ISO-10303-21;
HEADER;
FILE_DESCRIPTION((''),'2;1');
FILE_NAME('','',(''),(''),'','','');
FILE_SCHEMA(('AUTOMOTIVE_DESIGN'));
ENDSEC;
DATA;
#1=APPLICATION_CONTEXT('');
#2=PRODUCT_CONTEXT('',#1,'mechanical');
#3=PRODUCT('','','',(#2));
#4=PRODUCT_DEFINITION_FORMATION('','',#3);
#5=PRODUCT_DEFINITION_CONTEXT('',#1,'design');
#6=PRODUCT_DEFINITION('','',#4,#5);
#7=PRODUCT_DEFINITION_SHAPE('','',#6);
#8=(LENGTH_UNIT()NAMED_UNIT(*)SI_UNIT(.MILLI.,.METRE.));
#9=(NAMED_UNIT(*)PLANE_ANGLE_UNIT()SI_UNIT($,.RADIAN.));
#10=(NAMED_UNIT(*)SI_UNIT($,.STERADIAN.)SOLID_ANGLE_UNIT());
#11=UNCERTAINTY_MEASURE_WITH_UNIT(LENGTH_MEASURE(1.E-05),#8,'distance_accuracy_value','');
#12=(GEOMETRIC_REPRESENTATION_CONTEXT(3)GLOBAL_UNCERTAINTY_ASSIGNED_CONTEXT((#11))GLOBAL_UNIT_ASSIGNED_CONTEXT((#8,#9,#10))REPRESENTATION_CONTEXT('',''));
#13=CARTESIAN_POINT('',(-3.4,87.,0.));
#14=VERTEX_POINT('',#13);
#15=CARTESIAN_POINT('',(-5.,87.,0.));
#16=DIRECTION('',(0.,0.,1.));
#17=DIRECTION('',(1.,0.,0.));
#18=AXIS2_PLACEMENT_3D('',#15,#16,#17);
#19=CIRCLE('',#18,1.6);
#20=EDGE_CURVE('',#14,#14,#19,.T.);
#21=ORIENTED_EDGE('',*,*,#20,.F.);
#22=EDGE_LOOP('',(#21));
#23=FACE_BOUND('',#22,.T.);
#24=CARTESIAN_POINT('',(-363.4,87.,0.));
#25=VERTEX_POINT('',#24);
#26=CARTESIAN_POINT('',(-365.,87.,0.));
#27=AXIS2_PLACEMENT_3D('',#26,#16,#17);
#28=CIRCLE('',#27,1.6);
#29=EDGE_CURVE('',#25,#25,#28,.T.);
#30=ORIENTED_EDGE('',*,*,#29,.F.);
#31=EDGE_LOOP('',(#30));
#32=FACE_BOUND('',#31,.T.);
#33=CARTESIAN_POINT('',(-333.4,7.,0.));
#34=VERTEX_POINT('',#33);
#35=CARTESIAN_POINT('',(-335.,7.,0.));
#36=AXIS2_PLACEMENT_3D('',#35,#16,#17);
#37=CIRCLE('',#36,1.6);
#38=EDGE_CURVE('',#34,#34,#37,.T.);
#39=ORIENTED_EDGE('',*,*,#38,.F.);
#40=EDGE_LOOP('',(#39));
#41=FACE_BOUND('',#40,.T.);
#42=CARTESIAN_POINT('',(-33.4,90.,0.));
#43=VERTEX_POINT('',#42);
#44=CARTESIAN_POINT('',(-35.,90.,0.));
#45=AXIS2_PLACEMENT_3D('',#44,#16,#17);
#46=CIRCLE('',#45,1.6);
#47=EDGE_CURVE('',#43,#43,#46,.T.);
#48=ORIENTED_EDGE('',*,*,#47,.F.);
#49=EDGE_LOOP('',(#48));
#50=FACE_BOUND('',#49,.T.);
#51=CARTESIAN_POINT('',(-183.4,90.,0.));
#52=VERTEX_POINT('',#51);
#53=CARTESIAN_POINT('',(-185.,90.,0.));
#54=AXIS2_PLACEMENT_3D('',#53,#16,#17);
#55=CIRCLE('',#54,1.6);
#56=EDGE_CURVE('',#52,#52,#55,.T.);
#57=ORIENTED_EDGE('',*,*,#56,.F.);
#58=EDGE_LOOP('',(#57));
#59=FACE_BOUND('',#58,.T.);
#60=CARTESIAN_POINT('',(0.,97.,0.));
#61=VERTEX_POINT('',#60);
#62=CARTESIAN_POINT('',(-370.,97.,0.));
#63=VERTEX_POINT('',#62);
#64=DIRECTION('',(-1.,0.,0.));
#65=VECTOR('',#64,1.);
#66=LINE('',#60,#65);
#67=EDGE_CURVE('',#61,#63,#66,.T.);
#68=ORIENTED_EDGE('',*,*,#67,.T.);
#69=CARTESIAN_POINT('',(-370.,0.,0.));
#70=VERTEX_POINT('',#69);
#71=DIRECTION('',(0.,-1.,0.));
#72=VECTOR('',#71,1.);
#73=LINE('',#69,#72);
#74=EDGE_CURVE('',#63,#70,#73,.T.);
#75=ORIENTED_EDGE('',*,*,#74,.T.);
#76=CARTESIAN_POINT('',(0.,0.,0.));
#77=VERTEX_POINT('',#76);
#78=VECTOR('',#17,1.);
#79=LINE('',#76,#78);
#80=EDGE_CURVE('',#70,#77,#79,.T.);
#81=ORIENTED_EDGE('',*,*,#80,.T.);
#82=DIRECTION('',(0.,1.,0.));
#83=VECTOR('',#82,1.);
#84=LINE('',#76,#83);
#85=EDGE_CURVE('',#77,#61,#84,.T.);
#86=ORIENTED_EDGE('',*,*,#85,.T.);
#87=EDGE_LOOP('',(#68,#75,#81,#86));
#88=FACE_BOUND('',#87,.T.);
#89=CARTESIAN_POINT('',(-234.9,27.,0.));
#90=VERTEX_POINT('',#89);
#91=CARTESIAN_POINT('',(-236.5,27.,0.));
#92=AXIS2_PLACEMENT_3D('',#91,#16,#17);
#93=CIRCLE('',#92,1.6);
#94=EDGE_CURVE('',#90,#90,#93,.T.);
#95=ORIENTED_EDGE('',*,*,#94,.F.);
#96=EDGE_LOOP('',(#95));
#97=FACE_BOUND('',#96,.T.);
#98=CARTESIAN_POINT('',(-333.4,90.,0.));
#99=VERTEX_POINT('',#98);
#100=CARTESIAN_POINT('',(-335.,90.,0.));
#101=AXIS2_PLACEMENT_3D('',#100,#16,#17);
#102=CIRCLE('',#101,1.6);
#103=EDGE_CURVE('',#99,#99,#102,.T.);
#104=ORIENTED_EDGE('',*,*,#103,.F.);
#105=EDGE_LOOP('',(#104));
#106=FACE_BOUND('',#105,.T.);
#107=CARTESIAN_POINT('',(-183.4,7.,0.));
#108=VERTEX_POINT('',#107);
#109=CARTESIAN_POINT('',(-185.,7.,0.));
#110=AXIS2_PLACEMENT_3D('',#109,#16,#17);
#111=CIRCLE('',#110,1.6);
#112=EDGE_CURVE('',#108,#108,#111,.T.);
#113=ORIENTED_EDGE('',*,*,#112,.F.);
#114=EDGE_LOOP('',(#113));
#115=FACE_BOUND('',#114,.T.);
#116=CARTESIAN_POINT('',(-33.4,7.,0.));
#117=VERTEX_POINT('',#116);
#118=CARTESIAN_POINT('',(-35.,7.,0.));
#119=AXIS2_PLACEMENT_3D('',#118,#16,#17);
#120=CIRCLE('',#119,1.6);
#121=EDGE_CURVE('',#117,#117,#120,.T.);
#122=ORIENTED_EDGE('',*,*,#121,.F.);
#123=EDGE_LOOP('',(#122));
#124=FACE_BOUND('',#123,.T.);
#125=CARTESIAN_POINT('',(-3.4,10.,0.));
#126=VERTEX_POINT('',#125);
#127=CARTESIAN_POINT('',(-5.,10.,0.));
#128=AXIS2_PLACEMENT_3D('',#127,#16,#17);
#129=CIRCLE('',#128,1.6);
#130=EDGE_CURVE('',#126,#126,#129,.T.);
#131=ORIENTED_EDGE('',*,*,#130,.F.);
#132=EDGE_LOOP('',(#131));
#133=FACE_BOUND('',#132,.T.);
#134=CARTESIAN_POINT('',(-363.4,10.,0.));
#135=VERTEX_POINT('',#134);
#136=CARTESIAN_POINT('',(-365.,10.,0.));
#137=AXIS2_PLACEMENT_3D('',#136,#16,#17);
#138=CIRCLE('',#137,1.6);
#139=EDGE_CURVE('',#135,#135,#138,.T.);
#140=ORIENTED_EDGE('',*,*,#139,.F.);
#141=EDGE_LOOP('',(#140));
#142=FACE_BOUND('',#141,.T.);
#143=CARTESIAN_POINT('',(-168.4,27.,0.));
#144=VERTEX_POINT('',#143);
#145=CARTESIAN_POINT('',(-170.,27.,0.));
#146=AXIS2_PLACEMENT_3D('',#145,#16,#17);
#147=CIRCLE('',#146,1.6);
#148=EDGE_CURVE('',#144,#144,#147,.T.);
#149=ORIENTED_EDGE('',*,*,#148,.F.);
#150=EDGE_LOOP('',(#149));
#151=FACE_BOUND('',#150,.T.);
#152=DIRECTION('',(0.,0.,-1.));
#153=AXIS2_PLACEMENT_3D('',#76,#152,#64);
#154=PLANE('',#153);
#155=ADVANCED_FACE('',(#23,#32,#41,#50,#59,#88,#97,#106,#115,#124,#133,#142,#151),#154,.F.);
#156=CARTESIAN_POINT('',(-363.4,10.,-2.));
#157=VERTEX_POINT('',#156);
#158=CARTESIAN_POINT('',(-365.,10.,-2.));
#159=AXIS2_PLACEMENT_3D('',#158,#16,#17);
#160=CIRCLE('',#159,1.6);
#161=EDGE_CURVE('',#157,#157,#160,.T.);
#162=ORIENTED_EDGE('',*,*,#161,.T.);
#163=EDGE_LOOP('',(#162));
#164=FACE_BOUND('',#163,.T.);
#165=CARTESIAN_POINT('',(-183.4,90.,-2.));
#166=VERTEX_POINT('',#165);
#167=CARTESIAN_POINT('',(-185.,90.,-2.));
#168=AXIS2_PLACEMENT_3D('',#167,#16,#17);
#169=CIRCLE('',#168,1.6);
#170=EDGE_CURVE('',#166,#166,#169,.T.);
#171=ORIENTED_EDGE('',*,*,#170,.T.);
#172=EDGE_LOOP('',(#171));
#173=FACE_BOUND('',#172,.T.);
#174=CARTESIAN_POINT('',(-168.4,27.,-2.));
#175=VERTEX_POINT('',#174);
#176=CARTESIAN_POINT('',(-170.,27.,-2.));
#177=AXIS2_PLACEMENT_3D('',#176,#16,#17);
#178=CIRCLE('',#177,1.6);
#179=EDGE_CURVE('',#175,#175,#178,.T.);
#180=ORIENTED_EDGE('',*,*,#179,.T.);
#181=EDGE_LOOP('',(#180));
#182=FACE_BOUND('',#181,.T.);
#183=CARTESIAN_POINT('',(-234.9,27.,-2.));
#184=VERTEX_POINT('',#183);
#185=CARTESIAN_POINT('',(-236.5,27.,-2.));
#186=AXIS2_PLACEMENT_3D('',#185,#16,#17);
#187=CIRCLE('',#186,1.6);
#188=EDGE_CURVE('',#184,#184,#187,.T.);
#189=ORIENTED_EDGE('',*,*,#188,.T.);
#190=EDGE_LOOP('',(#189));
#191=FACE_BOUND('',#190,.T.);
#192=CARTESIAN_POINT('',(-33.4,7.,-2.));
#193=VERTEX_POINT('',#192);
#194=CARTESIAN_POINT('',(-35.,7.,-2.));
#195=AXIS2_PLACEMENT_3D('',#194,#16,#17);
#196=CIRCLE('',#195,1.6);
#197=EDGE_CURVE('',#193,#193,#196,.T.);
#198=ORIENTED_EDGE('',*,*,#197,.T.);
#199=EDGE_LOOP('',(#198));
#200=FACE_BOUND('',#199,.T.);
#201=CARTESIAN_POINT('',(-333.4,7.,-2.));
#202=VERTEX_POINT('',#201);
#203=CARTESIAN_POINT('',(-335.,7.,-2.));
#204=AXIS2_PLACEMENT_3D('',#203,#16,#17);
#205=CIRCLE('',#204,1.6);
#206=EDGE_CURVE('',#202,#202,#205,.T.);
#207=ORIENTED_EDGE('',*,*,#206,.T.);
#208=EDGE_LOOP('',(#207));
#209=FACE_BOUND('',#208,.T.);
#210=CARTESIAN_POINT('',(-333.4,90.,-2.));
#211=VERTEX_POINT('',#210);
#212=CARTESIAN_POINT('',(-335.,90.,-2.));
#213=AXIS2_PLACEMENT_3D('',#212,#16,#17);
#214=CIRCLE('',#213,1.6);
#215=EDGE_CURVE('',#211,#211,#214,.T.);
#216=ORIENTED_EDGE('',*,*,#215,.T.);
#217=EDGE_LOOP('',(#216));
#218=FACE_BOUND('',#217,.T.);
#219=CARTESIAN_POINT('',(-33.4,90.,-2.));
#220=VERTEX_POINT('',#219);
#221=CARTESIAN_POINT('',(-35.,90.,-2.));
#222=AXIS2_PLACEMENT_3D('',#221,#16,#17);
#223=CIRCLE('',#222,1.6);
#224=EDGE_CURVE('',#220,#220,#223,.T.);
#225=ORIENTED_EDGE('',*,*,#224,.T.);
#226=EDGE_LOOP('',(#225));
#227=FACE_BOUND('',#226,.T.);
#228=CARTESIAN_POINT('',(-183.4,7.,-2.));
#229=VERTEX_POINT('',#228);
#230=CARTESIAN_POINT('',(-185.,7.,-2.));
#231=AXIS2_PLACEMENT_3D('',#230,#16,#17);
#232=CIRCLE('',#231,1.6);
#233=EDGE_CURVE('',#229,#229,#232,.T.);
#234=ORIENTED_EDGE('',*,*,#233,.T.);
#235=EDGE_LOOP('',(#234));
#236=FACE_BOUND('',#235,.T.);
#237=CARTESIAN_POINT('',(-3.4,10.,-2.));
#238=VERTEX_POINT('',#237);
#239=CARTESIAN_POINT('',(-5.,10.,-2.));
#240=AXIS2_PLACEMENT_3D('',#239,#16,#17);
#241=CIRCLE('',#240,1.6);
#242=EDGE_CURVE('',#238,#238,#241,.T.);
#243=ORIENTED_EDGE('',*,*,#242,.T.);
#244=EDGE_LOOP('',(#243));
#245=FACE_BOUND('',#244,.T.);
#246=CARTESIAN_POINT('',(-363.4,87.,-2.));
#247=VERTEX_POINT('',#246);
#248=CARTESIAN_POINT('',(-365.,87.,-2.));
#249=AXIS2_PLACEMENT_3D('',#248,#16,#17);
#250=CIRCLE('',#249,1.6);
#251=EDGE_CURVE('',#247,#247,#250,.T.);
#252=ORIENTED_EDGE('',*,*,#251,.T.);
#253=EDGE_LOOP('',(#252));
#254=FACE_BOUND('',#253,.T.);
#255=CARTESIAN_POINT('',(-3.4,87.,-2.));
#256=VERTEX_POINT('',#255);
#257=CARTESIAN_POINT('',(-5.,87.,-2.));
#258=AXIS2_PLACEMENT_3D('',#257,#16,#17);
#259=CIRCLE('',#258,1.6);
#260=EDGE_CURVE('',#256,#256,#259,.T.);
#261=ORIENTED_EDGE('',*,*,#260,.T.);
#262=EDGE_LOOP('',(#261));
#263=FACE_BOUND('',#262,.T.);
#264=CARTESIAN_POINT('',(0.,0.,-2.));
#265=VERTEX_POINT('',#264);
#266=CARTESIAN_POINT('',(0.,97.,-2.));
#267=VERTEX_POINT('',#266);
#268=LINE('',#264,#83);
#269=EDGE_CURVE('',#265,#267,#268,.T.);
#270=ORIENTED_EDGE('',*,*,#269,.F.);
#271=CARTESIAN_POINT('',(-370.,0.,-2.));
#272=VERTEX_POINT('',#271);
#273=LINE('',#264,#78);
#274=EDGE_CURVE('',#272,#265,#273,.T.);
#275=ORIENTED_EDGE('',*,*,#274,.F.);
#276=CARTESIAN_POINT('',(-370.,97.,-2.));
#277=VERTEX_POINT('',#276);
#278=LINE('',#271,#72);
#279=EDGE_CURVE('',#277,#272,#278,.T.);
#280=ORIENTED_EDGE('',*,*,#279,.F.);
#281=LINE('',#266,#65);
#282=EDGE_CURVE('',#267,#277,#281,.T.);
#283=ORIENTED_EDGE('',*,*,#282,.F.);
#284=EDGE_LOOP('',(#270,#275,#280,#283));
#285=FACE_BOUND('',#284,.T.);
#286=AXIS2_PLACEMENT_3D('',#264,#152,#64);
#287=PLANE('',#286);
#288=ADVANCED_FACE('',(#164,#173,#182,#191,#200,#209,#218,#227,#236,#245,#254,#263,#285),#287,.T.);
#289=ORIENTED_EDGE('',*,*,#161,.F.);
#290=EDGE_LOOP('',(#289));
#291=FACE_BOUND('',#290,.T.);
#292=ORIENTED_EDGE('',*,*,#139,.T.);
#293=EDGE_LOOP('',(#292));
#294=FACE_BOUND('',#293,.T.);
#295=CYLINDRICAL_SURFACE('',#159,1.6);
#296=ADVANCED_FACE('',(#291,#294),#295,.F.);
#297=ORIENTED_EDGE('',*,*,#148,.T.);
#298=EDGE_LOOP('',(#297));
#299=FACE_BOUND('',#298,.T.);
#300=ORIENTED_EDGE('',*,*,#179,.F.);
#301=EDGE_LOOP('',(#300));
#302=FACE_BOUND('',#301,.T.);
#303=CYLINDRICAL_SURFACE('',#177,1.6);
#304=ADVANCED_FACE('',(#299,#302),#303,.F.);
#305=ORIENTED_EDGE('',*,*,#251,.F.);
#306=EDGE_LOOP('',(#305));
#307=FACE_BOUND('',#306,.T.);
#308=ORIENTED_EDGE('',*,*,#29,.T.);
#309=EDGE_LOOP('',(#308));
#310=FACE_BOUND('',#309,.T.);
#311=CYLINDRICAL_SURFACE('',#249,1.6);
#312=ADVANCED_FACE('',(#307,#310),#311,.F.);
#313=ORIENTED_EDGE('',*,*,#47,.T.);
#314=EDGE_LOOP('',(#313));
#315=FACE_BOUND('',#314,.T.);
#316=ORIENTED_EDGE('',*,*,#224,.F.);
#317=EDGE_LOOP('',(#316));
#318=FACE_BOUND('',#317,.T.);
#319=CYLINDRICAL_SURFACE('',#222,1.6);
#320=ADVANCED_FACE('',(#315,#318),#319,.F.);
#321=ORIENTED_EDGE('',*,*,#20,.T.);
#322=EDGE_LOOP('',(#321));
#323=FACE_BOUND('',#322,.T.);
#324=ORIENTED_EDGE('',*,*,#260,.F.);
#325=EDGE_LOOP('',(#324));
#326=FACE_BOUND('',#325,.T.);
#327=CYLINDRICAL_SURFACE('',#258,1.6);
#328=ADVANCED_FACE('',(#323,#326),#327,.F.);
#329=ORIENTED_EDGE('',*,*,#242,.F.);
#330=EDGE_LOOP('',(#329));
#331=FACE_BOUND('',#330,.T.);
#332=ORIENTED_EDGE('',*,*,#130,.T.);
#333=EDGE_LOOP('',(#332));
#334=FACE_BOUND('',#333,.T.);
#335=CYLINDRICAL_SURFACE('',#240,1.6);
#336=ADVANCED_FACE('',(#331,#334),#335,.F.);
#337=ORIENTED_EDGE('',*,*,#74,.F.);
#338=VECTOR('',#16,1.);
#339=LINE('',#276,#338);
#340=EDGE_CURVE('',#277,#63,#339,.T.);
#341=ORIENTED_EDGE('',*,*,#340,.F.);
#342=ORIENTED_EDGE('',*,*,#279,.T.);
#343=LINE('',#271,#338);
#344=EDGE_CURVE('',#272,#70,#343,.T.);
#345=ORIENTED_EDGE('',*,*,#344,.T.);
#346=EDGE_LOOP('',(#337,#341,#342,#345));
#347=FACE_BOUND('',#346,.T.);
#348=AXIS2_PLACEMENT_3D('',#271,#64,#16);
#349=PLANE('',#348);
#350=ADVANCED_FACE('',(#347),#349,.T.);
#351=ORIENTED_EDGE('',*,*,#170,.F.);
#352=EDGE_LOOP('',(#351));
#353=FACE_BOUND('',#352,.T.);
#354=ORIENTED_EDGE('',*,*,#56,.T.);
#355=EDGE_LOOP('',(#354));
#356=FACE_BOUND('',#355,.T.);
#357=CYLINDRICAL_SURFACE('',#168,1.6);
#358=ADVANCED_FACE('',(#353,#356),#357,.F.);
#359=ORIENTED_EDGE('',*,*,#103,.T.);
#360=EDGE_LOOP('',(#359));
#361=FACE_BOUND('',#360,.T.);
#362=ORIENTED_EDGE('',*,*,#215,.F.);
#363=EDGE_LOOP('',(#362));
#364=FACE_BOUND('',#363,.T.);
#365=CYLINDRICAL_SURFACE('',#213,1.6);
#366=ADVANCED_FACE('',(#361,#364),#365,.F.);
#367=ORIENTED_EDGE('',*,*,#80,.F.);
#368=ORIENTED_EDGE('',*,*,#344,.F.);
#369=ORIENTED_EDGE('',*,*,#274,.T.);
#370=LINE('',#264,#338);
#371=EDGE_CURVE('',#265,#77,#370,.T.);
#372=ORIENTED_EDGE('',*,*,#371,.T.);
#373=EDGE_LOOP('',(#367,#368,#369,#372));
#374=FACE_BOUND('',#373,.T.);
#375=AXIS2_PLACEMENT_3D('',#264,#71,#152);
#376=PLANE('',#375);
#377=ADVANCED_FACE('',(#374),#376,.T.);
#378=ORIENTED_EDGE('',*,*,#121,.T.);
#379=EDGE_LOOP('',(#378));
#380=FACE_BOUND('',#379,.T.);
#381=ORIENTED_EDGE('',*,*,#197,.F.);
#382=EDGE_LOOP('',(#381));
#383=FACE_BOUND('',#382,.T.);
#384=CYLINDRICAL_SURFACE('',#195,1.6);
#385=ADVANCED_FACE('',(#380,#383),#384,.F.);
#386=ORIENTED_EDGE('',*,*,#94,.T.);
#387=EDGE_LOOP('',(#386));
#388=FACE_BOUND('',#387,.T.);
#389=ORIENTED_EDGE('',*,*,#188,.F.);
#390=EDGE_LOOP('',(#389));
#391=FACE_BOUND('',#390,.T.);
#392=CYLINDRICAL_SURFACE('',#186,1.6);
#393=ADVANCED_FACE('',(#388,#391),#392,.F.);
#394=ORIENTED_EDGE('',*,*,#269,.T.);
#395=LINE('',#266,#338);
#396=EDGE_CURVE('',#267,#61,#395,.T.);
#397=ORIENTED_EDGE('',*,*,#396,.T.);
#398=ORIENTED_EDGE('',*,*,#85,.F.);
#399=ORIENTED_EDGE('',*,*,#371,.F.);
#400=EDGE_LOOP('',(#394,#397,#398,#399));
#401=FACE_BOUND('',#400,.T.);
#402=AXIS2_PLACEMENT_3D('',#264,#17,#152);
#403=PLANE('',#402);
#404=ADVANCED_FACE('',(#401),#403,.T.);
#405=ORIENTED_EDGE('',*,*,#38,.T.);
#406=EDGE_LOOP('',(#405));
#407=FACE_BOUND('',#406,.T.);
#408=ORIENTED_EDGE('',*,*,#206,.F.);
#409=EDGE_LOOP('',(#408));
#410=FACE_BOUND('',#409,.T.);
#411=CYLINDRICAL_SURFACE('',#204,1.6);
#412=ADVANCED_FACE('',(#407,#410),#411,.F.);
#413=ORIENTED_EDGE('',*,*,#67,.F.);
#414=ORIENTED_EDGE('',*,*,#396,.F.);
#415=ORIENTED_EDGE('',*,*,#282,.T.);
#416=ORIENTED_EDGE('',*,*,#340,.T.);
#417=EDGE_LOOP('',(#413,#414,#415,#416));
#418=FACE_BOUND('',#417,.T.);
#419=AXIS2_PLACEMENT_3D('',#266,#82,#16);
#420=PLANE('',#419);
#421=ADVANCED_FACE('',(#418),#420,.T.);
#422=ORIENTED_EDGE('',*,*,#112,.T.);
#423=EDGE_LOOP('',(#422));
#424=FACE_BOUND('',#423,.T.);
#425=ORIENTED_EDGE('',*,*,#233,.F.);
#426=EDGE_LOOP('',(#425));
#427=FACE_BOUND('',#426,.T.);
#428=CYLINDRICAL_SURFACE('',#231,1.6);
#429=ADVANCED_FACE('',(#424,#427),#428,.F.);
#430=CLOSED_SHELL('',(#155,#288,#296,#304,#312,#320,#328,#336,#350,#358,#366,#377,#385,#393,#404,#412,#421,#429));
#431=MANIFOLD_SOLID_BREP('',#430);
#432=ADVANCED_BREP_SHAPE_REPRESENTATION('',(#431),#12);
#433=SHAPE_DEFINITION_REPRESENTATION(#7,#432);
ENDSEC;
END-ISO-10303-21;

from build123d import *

# Parameters (mm, degrees)
SKETCH1_W          = 97
SKETCH1_H          = 370
SKETCH1_R          = 1.6
BASE_FLANGE1_DEPTH = 2


# Sheet-metal steps are written as plain solids
with BuildPart() as part:
    # Sketch1 → Base-Flange1 (new body)
    with BuildSketch(Plane(origin=(0, 0, 0), x_dir=(0, 1, 0), z_dir=(0, 0, 1))):
        with Locations((48.5, 185)):
            Rectangle(SKETCH1_W, SKETCH1_H)
        with Locations(Location((10, 5, 0), (0, 0, 270))):
            Circle(SKETCH1_R, mode=Mode.SUBTRACT)
        with Locations(Location((87, 5, 0), (0, 0, 270))):
            Circle(SKETCH1_R, mode=Mode.SUBTRACT)
        with Locations(Location((10, 365, 0), (0, 0, 270))):
            Circle(SKETCH1_R, mode=Mode.SUBTRACT)
        with Locations(Location((87, 365, 0), (0, 0, 270))):
            Circle(SKETCH1_R, mode=Mode.SUBTRACT)
        with Locations(Location((90, 185, 0), (0, 0, 270))):
            Circle(SKETCH1_R, mode=Mode.SUBTRACT)
        with Locations(Location((90, 35, 0), (0, 0, 270))):
            Circle(SKETCH1_R, mode=Mode.SUBTRACT)
        with Locations(Location((90, 335, 0), (0, 0, 270))):
            Circle(SKETCH1_R, mode=Mode.SUBTRACT)
        with Locations(Location((27, 236.5, 0), (0, 0, 270))):
            Circle(SKETCH1_R, mode=Mode.SUBTRACT)
        with Locations(Location((27, 170, 0), (0, 0, 270))):
            Circle(SKETCH1_R, mode=Mode.SUBTRACT)
        with Locations(Location((7, 185, 0), (0, 0, 270))):
            Circle(SKETCH1_R, mode=Mode.SUBTRACT)
        with Locations(Location((7, 335, 0), (0, 0, 270))):
            Circle(SKETCH1_R, mode=Mode.SUBTRACT)
        with Locations(Location((7, 35, 0), (0, 0, 270))):
            Circle(SKETCH1_R, mode=Mode.SUBTRACT)
    extrude(amount=-BASE_FLANGE1_DEPTH)


solid = part.part
